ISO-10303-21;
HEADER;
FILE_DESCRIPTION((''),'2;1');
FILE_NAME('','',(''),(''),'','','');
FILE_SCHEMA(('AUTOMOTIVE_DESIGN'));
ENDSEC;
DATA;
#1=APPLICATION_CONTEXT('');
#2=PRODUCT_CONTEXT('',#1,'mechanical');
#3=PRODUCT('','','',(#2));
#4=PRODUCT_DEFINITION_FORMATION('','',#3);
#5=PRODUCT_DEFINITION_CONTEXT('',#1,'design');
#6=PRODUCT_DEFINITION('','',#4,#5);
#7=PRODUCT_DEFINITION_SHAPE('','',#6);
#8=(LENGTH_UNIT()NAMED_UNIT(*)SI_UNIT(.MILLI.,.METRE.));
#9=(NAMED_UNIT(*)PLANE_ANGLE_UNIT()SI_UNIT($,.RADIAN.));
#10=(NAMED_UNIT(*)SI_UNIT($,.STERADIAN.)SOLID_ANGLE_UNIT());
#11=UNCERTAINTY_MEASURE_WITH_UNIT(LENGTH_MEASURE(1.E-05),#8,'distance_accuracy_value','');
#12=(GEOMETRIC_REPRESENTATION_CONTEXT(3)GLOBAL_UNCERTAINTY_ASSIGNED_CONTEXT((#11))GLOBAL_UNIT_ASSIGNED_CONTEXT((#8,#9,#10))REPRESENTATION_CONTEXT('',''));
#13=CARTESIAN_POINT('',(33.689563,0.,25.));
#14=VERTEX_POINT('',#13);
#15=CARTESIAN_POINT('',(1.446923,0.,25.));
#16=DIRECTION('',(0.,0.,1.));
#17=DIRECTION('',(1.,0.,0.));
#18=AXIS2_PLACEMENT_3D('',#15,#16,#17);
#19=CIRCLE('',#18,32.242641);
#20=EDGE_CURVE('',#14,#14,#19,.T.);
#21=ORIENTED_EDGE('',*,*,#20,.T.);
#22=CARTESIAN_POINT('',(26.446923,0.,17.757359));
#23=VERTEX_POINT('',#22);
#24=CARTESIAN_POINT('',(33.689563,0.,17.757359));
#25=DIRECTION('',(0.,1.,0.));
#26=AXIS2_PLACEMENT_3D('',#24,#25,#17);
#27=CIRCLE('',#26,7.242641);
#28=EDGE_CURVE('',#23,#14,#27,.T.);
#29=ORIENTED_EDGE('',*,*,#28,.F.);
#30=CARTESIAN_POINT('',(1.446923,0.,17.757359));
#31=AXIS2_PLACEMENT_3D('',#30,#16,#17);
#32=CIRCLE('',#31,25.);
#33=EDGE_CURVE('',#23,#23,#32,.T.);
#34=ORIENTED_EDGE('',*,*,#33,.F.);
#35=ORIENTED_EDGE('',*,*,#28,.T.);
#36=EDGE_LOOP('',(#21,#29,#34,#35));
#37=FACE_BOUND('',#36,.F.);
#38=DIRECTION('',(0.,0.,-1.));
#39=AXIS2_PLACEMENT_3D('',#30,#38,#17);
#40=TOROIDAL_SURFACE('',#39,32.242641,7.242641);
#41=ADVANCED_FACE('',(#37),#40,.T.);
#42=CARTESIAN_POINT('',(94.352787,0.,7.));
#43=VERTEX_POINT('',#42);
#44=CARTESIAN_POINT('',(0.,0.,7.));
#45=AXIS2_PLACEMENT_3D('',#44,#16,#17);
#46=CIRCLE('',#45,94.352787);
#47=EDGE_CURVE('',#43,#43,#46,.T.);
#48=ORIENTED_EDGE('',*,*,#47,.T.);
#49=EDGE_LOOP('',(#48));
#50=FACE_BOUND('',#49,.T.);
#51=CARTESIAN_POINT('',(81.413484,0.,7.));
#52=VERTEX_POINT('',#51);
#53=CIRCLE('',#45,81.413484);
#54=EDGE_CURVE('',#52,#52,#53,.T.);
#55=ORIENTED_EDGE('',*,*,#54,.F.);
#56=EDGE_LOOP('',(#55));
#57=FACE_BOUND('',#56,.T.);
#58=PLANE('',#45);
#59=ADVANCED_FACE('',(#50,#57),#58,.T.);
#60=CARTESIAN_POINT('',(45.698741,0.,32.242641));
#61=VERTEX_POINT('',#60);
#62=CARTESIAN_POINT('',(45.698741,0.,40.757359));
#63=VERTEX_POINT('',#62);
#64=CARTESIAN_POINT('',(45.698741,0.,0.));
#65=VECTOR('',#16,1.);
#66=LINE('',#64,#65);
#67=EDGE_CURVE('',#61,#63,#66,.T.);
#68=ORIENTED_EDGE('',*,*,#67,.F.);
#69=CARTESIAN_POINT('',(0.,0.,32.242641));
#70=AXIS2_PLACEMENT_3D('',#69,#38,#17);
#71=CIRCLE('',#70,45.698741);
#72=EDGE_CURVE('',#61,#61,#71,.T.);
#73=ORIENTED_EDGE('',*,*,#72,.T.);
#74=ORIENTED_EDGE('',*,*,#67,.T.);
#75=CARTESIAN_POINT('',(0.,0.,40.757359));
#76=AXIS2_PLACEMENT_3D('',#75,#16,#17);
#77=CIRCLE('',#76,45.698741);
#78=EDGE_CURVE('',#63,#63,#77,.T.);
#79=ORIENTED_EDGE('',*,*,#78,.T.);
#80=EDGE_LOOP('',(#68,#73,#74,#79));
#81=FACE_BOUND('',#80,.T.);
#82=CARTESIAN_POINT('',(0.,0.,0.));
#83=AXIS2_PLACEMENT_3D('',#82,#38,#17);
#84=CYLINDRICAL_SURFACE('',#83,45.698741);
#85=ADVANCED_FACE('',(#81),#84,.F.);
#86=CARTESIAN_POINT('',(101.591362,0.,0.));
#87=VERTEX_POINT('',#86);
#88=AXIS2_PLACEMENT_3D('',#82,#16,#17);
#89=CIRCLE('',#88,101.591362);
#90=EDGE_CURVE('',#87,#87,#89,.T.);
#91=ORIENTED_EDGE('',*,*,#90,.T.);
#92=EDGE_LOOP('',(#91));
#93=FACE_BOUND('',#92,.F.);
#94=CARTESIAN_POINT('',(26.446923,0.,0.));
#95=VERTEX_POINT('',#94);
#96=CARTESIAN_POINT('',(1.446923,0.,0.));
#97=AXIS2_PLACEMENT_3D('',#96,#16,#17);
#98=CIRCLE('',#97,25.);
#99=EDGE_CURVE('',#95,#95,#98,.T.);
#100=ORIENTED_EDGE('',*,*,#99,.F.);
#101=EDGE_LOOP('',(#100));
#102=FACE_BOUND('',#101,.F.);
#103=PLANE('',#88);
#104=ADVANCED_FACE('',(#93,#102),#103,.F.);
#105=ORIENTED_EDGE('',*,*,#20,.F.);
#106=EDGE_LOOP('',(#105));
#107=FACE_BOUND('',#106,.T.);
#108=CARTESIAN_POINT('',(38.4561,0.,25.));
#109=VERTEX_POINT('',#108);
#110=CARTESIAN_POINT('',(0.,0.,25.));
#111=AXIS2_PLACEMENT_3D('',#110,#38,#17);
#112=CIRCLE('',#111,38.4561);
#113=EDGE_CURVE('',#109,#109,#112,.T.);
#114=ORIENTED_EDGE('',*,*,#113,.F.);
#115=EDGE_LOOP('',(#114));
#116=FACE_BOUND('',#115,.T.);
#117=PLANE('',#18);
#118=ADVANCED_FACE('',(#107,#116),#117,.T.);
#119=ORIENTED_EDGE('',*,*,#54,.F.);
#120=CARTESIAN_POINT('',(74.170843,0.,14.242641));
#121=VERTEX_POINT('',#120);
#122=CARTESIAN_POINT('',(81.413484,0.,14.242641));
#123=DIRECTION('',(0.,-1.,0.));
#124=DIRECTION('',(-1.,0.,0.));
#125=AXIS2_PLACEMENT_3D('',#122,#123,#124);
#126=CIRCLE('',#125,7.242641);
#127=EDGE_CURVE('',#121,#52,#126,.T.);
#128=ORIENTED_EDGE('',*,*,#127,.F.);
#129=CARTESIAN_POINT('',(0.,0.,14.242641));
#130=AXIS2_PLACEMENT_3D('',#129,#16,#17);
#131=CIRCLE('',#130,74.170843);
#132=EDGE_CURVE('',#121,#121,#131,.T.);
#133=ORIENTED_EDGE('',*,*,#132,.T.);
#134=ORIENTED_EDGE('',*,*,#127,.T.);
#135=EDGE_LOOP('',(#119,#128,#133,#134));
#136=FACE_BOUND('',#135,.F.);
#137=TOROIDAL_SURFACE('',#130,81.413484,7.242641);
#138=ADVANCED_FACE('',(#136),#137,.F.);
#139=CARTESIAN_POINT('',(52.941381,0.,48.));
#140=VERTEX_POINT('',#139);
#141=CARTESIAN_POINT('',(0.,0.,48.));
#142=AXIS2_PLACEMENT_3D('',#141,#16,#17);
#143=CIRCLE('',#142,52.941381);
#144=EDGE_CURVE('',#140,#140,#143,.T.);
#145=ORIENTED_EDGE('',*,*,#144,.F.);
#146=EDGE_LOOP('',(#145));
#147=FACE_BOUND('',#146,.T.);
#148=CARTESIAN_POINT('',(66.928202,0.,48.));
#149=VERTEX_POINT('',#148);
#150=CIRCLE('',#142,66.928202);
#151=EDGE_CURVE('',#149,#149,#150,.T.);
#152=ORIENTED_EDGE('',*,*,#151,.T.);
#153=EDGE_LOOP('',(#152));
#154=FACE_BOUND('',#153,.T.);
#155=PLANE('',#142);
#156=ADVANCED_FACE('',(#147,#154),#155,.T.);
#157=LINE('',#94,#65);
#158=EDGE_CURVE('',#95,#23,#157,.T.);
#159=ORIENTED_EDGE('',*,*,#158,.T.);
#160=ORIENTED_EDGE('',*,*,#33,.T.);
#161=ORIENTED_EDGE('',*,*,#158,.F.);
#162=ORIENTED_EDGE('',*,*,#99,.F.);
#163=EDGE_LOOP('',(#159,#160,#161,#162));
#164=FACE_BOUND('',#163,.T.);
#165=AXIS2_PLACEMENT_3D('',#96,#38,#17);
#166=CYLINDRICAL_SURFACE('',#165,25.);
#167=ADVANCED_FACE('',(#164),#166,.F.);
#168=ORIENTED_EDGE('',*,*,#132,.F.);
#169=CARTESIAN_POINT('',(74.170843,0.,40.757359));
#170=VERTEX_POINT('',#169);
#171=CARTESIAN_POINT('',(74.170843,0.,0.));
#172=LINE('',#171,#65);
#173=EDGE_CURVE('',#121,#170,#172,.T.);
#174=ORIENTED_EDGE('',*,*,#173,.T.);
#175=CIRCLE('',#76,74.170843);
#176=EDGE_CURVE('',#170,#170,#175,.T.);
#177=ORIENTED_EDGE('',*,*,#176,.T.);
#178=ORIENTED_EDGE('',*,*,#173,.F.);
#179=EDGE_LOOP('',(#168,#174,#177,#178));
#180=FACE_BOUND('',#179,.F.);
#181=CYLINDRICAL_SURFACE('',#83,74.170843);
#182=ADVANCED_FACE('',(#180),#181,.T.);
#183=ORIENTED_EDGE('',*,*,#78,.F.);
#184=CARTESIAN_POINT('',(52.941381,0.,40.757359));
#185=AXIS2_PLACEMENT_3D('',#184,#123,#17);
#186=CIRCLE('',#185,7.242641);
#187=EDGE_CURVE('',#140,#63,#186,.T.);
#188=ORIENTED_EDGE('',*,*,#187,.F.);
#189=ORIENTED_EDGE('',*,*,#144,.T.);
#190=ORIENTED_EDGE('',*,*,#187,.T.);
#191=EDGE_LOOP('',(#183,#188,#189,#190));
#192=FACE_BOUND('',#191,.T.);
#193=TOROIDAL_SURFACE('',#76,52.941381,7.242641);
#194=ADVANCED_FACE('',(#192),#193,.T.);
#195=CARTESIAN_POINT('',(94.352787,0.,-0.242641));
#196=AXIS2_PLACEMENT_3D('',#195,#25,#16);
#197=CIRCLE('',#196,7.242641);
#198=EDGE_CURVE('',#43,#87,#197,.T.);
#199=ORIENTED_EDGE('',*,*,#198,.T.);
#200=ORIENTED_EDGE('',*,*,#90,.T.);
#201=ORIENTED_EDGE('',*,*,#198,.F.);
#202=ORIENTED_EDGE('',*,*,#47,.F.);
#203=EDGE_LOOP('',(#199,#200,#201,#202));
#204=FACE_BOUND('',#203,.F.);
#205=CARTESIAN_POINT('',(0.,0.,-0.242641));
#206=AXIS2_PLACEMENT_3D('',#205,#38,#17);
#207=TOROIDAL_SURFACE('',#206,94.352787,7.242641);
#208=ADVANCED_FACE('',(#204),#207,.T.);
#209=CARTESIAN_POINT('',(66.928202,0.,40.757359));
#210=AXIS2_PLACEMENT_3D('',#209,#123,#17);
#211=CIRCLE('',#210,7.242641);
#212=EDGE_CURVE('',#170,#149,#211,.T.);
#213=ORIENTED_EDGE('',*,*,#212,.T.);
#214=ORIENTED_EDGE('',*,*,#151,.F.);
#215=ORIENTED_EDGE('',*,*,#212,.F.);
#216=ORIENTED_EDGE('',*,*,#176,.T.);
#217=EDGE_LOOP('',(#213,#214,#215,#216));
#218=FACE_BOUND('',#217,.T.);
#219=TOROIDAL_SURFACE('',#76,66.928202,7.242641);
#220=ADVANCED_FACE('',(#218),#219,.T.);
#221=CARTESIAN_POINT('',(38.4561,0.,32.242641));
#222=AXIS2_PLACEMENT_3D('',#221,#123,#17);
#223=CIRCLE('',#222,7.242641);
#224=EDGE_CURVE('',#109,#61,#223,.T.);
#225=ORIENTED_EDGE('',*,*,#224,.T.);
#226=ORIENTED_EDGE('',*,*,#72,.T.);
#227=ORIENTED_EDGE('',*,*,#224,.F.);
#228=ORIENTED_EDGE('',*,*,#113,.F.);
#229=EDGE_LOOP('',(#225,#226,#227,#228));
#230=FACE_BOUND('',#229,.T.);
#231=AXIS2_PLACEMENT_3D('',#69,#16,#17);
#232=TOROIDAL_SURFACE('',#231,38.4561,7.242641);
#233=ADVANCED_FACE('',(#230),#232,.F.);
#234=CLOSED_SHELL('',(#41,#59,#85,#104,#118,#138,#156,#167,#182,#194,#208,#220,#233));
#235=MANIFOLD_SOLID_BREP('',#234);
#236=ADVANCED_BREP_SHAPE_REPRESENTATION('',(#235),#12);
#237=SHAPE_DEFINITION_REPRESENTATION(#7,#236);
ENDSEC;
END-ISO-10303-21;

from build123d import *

# Parameters (mm, degrees)
F1_R     = 74.1708430985
F1_R_2   = 45.6987407436
F2_DEPTH = 48
F0_R     = 50
F0_R_2   = 25
F3_DEPTH = 25
F4_R     = 7.2426406871
F1_R_3   = 101.591361741
F5_DEPTH = 7


# Not quite as in the source:
# - a fillet or chamfer that OpenCascade refuses, or shapes differently, is made with other operations: its cross-section is extruded or revolved along the edge and cut away or added


with BuildPart() as f2:
    # F1 (on Top) → F2 (new body)
    with BuildSketch(Plane.XY):
        Circle(F1_R)
        Circle(F1_R_2, mode=Mode.SUBTRACT)
    extrude(amount=F2_DEPTH)

    # F0 (on Top) → F3 (join)
    with BuildSketch(Plane.XY):
        with Locations((1.4469225327, 0)):
            Circle(F0_R)
        with Locations((1.4469225327, 0)):
            Circle(F0_R_2, mode=Mode.SUBTRACT)
    extrude(amount=F3_DEPTH)

    # F4
    f4_edges = [f2.edges().sort_by_distance(p)[0] for p in [
        (-45.698741, 0, 25),
        (-23.553077, 0, 25),
        (-74.170843, 0, 48),
        (-45.698741, 0, 48),
    ]]
    fillet(f4_edges, radius=F4_R)

    # F1 (on Top) → F5 (join)
    with BuildSketch(Plane.XY):
        Circle(F1_R_3)
        Circle(F1_R, mode=Mode.SUBTRACT)
    extrude(amount=F5_DEPTH)

    # F6: fillet of radius 7.2426406871 on 2 edges, made by hand

    # F6_s1 → F6_t2 (revolve)
    with BuildSketch(Plane.XZ):
        with BuildLine():
            ThreePointArc((74.1708430985, 14.2426406871), (76.2921634421, 9.1213203436), (81.4134837857, 7))
            Line((81.4134837857, 7), (74.1708430985, 7))
            Line((74.1708430985, 7), (74.1708430985, 14.2426406871))
        make_face()
    revolve(axis=Axis((0, 0, 7), (0, 0, 1)))

    # F6_s3 → F6_t4 (revolve, cut)
    with BuildSketch(Plane.XZ):
        with BuildLine():
            ThreePointArc((94.3527866313, 7), (99.3875897461, 4.9637593857), (101.591361741, 0))
            Line((101.591361741, 0), (101.591361741, 7))
            Line((101.591361741, 7), (94.3527866313, 7))
        make_face()
    revolve(axis=Axis((0, 0, 7), (0, 0, 1)), mode=Mode.SUBTRACT)


solid = f2.part
